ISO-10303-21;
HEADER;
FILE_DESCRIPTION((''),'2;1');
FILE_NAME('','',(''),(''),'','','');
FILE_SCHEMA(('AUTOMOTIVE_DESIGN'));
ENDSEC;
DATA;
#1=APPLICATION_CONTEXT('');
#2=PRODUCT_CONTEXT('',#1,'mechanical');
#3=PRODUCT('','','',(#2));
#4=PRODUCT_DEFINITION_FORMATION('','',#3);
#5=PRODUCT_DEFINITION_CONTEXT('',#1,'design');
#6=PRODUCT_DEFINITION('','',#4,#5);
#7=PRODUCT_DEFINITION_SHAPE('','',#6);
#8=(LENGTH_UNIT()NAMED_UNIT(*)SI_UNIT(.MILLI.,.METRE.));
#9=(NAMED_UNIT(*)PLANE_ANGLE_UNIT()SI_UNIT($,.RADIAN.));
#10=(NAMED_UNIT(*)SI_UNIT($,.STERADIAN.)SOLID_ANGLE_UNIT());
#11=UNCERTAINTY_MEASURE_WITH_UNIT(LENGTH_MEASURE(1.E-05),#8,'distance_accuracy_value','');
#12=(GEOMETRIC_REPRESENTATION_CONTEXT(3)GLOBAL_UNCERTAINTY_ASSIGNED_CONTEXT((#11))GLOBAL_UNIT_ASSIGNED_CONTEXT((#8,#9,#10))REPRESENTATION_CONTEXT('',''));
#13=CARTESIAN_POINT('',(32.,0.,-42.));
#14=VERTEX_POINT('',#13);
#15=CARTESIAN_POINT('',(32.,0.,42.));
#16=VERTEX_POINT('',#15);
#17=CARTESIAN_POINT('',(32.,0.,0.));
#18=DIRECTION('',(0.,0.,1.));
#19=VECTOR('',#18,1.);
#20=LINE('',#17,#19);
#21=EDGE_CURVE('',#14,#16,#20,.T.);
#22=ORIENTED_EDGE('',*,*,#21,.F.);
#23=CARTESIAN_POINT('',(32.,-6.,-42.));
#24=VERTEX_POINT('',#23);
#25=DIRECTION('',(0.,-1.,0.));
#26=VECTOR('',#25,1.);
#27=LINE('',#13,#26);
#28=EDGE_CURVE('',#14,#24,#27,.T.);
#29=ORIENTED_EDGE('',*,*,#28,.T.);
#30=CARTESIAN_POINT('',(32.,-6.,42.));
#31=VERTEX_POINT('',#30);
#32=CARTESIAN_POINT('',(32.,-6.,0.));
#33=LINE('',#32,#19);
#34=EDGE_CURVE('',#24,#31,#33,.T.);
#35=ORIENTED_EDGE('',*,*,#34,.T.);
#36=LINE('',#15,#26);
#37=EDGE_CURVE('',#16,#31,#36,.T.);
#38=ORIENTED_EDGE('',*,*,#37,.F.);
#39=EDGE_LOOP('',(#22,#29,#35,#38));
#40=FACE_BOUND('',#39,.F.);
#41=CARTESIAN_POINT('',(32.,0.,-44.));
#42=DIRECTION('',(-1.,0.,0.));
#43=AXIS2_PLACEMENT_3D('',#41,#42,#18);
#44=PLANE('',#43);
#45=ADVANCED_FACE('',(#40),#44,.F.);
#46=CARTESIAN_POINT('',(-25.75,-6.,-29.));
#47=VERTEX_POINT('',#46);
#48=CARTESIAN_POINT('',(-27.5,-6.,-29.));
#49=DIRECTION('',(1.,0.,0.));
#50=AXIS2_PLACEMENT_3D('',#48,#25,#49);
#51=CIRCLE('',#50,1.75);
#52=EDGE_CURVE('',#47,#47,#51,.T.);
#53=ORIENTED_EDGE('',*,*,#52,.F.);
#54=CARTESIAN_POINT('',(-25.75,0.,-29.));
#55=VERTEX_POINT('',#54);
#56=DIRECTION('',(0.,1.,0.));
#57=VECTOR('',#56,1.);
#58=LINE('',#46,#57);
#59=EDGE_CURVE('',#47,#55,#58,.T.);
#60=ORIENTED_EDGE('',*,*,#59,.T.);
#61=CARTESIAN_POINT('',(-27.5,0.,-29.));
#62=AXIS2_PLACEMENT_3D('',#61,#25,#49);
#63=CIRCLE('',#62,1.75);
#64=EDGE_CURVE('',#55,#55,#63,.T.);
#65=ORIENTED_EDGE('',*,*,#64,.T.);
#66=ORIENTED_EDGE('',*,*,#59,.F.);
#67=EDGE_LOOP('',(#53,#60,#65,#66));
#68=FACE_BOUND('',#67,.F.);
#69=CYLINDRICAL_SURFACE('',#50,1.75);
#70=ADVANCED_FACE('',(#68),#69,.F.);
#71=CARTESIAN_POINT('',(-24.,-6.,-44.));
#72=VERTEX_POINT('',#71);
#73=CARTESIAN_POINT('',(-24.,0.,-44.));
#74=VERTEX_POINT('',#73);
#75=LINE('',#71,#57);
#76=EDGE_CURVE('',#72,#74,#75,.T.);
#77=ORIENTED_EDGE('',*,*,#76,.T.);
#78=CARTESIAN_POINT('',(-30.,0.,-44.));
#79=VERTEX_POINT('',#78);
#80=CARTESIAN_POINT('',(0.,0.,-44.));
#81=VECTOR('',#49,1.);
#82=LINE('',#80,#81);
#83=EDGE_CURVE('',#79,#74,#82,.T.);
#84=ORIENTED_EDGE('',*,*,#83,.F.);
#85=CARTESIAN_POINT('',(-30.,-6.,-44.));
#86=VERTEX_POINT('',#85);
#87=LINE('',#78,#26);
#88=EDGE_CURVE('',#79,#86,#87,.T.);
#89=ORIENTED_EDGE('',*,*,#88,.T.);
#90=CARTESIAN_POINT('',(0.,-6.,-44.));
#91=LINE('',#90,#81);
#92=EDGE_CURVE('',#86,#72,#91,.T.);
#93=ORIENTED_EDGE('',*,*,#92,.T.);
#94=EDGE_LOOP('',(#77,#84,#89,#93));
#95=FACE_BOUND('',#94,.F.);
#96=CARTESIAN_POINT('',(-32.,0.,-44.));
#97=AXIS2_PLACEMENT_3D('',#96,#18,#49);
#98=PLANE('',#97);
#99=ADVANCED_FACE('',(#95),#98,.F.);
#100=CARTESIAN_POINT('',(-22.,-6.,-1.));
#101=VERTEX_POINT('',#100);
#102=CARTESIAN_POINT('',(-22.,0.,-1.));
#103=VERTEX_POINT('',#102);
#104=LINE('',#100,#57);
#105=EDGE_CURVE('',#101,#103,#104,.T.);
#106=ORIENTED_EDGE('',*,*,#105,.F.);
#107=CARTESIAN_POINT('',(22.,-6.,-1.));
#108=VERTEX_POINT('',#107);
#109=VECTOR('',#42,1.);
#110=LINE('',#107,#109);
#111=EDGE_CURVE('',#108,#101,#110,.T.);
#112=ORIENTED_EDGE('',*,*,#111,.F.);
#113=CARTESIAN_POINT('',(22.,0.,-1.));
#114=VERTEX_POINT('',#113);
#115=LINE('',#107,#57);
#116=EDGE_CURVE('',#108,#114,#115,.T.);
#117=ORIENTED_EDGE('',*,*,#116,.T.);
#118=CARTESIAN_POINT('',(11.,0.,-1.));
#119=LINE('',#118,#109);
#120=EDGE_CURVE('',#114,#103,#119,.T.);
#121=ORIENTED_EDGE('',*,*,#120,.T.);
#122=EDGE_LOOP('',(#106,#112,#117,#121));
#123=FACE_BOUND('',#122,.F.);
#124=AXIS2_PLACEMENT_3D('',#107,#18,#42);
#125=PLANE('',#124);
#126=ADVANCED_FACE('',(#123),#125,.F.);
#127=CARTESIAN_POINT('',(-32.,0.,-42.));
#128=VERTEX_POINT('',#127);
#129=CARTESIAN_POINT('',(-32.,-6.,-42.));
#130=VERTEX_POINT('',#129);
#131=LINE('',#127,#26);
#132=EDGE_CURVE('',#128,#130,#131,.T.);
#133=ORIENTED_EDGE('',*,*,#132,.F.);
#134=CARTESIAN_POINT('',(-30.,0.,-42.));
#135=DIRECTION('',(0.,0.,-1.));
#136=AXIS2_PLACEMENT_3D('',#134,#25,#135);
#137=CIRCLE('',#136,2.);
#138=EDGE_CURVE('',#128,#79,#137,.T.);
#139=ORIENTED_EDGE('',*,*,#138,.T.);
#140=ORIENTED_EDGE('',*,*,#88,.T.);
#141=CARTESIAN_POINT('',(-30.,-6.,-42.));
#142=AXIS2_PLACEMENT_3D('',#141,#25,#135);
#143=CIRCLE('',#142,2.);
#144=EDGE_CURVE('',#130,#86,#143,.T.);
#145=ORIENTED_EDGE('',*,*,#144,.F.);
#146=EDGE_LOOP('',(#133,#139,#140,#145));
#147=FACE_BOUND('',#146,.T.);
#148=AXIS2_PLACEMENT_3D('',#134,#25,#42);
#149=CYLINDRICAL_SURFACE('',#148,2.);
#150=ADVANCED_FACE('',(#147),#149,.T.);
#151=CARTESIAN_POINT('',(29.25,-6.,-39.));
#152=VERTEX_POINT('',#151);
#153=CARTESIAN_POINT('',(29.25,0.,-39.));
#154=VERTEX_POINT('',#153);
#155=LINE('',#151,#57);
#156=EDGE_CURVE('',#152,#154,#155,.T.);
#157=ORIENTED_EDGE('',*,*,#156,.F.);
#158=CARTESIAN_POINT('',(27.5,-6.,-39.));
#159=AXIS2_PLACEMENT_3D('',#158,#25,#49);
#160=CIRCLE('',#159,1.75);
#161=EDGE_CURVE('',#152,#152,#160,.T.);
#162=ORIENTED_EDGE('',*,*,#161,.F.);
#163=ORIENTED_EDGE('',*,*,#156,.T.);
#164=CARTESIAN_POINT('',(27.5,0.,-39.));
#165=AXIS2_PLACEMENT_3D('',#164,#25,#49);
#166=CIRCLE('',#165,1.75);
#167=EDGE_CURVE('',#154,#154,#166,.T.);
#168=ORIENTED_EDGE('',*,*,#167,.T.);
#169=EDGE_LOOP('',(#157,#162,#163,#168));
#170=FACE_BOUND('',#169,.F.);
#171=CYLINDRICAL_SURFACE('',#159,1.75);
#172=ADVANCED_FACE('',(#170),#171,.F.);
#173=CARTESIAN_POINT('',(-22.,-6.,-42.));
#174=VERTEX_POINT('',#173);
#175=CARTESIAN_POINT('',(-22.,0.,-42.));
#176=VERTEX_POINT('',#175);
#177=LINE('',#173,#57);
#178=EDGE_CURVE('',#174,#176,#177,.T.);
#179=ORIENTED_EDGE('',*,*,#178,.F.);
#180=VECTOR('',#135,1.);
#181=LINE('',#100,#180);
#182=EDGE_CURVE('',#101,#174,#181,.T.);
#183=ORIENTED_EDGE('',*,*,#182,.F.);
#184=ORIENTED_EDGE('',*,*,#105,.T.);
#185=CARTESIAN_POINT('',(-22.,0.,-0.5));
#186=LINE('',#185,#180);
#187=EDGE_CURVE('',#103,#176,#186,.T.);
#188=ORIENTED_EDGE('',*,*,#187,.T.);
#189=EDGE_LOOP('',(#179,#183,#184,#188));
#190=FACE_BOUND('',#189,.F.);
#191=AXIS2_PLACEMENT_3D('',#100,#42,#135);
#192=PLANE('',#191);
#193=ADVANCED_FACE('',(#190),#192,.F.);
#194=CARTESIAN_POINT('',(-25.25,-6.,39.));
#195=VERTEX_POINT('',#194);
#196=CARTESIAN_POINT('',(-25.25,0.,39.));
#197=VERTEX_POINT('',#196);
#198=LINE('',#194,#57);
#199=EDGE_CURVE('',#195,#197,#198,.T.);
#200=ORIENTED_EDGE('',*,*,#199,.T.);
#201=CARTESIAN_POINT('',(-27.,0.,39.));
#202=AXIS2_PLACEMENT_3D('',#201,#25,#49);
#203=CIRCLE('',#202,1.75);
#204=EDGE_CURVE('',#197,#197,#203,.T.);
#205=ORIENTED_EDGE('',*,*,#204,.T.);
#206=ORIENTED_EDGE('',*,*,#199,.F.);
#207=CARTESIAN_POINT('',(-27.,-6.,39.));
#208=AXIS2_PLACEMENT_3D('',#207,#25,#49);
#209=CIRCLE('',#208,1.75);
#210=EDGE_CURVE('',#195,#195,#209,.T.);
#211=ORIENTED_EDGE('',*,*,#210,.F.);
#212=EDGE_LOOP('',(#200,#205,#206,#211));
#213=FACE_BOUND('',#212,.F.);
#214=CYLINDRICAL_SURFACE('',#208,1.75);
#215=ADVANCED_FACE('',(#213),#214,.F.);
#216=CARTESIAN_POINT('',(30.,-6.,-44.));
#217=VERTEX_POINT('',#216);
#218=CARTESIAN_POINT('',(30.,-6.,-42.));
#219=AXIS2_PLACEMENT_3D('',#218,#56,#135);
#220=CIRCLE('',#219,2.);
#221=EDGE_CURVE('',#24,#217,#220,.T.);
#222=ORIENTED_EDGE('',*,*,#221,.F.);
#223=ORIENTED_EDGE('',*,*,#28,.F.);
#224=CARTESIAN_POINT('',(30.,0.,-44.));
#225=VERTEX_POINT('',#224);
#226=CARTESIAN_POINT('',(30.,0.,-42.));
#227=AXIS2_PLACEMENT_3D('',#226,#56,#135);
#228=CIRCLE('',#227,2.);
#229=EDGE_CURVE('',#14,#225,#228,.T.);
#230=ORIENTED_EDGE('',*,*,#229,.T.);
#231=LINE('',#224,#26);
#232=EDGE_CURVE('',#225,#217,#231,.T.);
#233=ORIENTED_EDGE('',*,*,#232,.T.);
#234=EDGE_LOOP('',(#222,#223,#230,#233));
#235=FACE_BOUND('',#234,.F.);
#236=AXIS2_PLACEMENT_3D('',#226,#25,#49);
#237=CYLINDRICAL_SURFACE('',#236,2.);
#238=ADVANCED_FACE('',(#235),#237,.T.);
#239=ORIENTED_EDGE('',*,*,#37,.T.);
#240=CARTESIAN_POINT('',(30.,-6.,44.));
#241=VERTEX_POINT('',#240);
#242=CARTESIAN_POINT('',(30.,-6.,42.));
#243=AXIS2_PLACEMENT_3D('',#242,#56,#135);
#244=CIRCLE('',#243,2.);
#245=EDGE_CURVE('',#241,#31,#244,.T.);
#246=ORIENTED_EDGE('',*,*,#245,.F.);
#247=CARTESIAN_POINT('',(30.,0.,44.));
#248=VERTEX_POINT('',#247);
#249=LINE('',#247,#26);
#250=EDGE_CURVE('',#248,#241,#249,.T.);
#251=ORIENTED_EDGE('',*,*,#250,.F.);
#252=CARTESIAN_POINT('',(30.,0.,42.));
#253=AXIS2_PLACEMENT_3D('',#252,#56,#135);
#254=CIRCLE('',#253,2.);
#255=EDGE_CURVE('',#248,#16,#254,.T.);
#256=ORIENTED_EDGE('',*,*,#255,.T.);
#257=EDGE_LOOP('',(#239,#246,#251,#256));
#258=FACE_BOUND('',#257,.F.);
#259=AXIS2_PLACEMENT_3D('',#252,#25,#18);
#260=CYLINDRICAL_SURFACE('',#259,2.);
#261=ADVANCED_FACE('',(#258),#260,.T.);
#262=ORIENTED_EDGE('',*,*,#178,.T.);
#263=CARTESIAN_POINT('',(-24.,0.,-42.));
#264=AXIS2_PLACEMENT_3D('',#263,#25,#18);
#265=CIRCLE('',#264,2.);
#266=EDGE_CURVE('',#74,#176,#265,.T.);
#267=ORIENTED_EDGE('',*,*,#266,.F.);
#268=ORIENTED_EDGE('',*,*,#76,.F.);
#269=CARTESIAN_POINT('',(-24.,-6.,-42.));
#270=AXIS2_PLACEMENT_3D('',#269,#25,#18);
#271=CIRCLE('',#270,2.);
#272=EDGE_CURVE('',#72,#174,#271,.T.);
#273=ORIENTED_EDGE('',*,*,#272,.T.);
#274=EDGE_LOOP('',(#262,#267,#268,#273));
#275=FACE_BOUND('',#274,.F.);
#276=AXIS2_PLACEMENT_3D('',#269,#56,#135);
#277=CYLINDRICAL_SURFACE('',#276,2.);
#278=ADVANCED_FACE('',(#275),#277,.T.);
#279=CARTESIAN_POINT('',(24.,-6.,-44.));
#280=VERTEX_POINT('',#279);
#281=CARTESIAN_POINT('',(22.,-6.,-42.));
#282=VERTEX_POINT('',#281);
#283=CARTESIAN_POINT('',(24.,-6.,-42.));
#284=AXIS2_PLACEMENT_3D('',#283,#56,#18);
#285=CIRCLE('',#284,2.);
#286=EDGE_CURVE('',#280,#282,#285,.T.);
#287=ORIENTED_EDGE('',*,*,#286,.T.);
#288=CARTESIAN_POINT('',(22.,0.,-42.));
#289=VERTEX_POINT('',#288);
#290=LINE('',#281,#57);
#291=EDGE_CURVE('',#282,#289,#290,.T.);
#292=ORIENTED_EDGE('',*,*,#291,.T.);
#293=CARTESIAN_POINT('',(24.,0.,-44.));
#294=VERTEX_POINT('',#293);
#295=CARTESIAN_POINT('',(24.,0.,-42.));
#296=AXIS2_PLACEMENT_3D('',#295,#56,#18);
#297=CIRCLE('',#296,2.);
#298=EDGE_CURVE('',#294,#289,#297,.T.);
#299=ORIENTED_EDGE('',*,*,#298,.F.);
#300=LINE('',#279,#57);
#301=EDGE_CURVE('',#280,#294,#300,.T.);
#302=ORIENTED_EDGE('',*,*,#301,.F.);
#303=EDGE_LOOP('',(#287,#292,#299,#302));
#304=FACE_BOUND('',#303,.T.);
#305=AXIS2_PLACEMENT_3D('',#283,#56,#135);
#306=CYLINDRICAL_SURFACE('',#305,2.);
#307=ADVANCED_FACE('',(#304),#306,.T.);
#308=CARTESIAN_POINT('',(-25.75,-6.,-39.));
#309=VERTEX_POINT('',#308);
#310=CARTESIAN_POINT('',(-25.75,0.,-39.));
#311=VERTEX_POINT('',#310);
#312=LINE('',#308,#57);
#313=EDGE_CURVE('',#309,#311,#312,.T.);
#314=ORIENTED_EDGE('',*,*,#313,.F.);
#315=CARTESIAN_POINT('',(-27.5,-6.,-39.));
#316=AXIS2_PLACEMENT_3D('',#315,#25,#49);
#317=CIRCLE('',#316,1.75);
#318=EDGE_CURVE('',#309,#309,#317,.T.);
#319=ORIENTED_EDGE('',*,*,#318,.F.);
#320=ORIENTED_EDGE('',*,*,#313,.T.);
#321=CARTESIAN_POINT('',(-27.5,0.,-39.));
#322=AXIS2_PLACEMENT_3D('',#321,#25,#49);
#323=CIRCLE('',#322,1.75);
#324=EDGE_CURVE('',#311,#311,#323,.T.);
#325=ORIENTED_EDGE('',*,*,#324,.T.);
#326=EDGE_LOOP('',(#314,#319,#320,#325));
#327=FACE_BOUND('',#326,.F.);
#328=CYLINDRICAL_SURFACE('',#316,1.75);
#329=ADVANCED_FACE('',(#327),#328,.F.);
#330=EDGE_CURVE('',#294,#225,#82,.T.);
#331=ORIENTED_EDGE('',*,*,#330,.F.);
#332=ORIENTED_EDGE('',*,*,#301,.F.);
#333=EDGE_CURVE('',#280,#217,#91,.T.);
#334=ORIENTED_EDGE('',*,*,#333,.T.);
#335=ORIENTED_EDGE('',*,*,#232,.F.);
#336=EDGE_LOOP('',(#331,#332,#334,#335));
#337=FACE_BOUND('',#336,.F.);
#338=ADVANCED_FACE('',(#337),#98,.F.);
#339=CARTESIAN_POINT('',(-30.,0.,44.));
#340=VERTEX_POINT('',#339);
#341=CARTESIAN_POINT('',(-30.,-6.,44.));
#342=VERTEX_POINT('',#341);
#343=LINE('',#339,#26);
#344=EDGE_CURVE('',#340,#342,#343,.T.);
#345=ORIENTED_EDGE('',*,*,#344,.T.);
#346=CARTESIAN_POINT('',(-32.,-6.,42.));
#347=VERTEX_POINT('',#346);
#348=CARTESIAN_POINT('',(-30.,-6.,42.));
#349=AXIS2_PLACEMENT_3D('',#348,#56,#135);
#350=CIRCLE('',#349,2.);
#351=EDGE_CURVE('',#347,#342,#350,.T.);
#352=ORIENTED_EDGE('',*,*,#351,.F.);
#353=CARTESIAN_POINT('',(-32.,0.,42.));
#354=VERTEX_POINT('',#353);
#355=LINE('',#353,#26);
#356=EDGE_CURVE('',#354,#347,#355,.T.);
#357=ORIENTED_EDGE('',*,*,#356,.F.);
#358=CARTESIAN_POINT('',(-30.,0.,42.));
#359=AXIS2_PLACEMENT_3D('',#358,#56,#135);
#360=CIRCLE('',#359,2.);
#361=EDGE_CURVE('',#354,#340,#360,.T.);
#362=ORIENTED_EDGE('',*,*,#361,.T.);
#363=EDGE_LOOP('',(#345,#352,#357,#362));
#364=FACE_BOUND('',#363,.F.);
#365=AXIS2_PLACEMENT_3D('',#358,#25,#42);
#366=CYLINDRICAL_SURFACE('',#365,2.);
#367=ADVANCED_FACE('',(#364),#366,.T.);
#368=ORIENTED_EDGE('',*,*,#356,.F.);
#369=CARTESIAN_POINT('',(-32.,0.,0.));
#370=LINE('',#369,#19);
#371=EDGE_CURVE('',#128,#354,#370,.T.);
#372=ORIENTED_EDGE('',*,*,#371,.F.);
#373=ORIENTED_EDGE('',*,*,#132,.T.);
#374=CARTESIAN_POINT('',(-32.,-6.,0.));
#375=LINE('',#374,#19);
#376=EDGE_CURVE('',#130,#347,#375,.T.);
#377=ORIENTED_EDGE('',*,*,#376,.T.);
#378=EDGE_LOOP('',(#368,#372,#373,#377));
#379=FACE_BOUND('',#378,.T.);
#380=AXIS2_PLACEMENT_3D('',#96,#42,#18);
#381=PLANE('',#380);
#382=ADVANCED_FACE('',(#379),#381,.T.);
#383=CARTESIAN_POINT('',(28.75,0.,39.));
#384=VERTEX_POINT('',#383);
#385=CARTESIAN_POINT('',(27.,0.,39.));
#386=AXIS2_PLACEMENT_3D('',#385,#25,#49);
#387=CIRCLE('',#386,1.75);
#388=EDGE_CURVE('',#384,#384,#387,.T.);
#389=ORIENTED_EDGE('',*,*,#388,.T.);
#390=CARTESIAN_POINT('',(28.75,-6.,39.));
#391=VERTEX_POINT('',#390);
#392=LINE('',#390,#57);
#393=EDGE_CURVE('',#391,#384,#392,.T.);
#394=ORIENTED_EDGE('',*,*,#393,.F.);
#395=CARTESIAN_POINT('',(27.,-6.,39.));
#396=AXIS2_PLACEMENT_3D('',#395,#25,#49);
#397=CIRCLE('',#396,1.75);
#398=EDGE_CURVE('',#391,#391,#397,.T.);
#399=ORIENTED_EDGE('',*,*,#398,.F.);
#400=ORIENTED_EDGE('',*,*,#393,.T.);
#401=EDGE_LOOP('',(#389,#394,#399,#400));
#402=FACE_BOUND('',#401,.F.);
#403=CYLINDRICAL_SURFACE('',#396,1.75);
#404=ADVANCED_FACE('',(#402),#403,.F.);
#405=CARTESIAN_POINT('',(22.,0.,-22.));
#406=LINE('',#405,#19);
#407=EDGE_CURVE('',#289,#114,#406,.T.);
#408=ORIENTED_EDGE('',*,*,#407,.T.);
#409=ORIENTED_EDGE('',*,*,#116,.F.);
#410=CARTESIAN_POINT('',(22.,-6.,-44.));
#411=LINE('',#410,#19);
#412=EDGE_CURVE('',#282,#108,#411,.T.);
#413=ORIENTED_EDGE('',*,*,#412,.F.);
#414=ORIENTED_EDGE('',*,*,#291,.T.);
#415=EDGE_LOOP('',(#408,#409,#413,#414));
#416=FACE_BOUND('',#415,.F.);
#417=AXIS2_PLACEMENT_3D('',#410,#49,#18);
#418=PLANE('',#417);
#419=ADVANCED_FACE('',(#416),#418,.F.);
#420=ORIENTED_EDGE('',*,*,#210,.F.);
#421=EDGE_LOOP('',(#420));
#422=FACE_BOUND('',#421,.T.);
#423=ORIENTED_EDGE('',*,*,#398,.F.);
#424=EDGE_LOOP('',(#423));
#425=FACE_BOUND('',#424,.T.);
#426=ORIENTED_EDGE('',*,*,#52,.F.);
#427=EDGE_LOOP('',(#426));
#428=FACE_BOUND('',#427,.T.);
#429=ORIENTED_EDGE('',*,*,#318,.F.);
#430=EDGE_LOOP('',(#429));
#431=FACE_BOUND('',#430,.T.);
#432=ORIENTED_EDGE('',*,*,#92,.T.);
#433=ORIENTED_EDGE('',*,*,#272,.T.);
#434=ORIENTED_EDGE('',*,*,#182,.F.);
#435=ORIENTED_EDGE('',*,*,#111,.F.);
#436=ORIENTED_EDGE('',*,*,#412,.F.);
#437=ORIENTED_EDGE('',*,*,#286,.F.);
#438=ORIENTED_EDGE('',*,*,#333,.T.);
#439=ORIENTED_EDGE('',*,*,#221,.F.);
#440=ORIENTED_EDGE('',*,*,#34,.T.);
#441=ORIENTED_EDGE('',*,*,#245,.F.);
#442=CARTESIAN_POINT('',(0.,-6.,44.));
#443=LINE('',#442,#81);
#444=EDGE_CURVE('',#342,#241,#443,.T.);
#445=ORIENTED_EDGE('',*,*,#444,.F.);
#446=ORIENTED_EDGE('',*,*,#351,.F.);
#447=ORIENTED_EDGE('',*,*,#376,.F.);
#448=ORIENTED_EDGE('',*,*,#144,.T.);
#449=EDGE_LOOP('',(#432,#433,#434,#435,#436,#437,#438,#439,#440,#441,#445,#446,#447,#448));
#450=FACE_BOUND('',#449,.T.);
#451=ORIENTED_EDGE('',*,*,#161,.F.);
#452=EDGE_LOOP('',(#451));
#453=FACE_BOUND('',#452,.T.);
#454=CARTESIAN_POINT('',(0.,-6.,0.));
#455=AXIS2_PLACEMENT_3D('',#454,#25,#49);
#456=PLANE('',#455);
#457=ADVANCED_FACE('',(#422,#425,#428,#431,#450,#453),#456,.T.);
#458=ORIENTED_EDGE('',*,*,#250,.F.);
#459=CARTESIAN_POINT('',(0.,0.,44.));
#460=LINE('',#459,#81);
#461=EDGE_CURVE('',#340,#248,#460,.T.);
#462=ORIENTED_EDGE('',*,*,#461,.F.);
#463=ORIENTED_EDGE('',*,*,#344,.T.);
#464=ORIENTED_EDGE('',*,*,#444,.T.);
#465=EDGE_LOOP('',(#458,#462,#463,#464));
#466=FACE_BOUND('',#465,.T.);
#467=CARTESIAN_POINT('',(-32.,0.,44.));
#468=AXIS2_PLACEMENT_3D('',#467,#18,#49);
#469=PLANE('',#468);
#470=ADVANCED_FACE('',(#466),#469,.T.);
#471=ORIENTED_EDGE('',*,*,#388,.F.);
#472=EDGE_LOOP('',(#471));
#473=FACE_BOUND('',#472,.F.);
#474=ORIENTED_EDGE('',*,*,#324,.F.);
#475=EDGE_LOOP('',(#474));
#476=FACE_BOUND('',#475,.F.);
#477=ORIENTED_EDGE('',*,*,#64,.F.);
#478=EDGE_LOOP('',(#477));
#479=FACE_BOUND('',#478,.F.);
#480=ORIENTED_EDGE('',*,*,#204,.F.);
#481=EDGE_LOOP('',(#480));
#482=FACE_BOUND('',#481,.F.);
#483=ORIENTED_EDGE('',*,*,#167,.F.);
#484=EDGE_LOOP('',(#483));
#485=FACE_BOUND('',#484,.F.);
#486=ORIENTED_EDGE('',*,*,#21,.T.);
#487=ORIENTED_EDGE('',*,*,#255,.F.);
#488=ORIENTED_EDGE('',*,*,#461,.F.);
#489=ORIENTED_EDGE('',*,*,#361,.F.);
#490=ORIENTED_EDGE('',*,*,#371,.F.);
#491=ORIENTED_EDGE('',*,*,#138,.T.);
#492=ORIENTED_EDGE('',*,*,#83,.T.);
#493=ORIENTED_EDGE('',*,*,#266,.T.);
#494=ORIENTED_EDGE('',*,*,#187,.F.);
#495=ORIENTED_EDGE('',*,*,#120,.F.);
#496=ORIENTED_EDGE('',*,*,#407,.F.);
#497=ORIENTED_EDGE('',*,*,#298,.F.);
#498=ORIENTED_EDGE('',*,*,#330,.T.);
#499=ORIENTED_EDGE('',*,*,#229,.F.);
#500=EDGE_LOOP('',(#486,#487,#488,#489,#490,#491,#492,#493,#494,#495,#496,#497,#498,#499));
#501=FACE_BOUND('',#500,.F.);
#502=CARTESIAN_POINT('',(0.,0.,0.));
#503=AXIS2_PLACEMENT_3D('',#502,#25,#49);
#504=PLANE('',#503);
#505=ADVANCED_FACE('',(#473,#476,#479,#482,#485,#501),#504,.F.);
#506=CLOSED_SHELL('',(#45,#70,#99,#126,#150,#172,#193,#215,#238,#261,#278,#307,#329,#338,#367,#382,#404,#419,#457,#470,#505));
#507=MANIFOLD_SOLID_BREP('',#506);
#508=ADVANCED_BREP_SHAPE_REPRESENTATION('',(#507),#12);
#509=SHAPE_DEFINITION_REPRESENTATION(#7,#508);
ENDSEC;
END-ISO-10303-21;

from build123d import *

# Parameters (mm, degrees)
F0_W     = 64
F0_H     = 88
F1_DEPTH = 6
F2_R     = 1.75
F3_DEPTH = 25
F4_R     = 2


# Not quite as in the source:
# - a feature names something its author has since deleted; it is built from what else it names


with BuildPart() as f1:
    # F0 (on Front) → F1 (new body)
    with BuildSketch(Plane.XZ):
        Rectangle(F0_W, F0_H)
    extrude(amount=F1_DEPTH)

    # F2 (on face) → F3 (cut)
    with BuildSketch(Plane.XZ.offset(6)):
        Polygon((22, -1), (0, -1), (-22, -1), (-22, -44), (22, -44), align=None)
        with Locations((27.5, -39)):
            Circle(F2_R)
        with Locations((-27.5, -29)):
            Circle(F2_R)
        with Locations((-27.5, -39)):
            Circle(F2_R)
        with Locations((-27, 39)):
            Circle(F2_R)
        with Locations((27, 39)):
            Circle(F2_R)
    extrude(amount=-F3_DEPTH, mode=Mode.SUBTRACT)

    # F4
    f4_edges = [f1.edges().sort_by_distance(p)[0] for p in [
        (-32, -3, 44),
        (32, -3, 44),
        (-32, -3, -44),
        (32, -3, -44),
        (-22, -3, -44),
        (22, -3, -44),
    ]]
    fillet(f4_edges, radius=F4_R)


solid = f1.part
